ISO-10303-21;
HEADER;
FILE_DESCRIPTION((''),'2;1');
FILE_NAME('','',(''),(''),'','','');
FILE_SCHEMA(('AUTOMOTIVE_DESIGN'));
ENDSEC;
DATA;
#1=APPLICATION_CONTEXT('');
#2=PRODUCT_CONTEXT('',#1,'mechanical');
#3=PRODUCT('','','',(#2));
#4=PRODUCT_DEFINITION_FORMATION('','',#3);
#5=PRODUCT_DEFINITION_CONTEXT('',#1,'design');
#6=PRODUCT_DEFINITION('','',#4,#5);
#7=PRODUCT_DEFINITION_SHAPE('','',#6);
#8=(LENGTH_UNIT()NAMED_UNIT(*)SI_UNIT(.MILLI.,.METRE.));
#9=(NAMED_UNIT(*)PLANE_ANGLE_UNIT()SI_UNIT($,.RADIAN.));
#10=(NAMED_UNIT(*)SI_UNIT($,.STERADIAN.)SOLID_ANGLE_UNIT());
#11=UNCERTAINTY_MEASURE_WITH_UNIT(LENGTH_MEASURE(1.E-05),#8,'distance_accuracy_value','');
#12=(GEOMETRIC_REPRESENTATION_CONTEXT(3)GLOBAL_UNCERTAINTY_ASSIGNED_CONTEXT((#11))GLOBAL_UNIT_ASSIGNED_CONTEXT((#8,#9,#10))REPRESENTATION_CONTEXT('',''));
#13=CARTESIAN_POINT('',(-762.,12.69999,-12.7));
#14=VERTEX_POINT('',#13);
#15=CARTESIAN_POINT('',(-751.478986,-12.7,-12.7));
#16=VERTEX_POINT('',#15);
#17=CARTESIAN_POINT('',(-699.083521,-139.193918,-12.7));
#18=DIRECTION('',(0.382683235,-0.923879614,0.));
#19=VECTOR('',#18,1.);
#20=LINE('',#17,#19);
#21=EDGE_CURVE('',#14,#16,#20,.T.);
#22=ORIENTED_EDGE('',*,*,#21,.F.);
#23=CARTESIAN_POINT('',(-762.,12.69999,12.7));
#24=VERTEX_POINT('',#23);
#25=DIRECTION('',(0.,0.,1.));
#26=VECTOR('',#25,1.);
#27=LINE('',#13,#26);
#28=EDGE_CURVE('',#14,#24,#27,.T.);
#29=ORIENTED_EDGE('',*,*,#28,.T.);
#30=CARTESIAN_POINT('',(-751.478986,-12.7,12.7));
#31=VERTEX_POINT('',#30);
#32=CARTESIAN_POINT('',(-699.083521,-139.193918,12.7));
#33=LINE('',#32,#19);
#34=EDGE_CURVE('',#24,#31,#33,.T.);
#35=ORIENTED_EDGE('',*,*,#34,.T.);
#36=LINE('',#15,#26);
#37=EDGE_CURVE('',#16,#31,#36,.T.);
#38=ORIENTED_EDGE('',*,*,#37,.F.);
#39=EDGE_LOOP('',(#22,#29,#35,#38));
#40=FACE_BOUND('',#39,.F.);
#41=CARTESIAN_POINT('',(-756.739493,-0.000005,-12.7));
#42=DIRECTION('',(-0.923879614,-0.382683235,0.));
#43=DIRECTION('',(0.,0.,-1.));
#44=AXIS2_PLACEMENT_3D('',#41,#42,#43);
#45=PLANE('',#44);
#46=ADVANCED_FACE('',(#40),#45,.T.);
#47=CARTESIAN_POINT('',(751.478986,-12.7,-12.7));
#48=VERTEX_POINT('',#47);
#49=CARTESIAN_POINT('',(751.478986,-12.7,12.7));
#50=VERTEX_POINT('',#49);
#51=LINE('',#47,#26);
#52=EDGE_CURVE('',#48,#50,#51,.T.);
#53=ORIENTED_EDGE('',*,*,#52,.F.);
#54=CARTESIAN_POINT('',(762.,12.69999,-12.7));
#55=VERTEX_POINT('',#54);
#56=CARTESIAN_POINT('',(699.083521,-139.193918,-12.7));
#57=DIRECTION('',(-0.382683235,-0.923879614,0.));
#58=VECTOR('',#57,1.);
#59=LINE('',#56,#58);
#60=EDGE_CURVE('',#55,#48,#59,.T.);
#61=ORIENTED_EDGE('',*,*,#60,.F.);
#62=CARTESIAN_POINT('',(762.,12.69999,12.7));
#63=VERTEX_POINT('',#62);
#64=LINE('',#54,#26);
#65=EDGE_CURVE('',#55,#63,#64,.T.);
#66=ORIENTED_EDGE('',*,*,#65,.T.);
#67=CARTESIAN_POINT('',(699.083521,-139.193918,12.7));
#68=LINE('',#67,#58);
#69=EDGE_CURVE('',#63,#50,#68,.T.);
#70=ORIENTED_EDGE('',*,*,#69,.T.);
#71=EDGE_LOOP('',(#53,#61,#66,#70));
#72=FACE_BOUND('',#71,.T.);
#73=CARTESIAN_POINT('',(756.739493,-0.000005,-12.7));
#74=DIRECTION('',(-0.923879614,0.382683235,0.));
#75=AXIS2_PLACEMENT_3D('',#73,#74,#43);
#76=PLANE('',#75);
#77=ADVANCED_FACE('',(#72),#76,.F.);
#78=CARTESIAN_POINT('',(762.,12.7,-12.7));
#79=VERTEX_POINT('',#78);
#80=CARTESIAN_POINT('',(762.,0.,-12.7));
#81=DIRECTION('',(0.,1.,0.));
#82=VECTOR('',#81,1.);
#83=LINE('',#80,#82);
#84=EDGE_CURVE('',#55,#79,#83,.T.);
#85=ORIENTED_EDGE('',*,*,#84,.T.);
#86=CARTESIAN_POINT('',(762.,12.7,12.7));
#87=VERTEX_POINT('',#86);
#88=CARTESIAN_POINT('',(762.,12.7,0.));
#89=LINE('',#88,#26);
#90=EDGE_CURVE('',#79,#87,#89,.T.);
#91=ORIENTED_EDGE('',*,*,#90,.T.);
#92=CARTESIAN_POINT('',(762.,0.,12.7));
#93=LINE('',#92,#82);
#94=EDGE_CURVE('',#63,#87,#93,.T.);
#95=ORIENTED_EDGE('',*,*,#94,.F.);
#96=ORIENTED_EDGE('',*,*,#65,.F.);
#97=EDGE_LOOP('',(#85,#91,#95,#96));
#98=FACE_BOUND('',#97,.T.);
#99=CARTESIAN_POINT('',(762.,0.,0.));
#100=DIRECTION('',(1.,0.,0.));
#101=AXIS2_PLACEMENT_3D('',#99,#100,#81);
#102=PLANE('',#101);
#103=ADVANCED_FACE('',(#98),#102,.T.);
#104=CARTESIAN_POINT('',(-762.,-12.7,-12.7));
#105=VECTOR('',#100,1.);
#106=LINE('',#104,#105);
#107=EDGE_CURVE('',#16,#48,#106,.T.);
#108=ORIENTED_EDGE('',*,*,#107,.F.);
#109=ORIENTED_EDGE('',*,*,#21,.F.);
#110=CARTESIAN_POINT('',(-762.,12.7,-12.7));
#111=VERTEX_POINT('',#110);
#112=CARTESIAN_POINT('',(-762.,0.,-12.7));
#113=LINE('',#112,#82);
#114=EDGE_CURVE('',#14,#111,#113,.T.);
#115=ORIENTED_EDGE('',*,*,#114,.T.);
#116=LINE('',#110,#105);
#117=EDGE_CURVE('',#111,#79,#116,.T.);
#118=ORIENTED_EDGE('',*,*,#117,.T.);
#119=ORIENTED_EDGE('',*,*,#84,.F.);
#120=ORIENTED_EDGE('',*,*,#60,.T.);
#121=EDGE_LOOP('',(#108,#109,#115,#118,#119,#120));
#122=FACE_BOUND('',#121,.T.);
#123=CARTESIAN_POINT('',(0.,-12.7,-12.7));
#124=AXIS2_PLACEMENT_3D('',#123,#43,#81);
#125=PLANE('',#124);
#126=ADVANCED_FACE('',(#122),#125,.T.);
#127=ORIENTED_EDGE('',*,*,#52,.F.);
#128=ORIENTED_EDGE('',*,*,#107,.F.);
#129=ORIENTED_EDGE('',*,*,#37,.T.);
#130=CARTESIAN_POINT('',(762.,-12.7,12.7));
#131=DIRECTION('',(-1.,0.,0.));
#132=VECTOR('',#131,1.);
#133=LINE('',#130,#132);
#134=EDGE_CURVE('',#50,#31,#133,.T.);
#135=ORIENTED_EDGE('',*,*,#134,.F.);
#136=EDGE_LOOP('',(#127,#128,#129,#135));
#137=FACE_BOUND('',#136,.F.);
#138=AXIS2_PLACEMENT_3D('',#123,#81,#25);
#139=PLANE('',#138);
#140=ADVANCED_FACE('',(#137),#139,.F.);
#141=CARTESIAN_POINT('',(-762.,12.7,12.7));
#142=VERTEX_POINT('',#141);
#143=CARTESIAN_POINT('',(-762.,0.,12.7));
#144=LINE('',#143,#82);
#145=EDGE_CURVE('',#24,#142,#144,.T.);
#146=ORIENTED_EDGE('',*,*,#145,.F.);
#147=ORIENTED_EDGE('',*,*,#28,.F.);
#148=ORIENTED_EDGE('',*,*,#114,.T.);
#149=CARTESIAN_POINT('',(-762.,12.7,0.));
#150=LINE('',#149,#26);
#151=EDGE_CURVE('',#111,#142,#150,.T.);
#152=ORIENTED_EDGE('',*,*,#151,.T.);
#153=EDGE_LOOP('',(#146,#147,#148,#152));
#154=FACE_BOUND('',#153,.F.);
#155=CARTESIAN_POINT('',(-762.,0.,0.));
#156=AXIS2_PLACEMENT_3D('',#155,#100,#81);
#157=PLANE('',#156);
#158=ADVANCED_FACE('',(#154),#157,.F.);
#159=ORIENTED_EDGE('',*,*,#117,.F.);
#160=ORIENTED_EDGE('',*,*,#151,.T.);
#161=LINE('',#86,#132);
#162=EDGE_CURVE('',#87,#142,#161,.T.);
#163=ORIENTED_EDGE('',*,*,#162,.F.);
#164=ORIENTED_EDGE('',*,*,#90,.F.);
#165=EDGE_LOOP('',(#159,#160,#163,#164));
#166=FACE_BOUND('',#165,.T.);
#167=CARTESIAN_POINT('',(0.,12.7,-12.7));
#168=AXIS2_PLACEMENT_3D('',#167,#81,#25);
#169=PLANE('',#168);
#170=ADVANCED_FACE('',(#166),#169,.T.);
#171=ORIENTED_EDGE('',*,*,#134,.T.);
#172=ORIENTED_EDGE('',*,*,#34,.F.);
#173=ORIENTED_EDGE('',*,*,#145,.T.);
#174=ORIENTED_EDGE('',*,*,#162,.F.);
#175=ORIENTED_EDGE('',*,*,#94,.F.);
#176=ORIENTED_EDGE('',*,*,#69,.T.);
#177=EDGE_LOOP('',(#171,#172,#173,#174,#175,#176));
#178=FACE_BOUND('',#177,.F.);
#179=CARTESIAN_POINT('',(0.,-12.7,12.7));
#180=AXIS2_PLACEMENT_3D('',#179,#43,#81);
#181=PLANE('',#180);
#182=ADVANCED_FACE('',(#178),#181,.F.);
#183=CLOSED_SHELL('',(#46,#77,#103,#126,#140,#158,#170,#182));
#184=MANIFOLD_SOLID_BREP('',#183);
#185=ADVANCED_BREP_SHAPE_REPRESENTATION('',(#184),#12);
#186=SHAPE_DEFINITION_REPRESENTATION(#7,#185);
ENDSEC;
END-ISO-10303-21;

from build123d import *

# Parameters (mm, degrees)
F0_W       = 25.4
F0_H       = 25.4
F1_DEPTH   = 762
F2_SIZE2   = 10.521014
F2_SIZE    = 25.39999
F2_2_SIZE2 = 10.521014
F2_2_SIZE  = 25.39999


# Not quite as in the source:
# - a fillet or chamfer is up to 0.001 mm smaller than in the source, because OpenCascade refuses the exact size


with BuildPart() as f1:
    # F0 (on Right) → F1 (new body, symmetric)
    with BuildSketch(Plane.YZ):
        Rectangle(F0_W, F0_H)
    extrude(amount=F1_DEPTH, both=True)

    # F2 (size 25.4 and 10.5210244843 in the source; OpenCascade refuses exactly that, so slightly less here)
    f2_edges = [f1.edges().sort_by_distance(p)[0] for p in [
        (762, -12.7, 0),
    ]]
    f2_side = f1.faces().sort_by_distance((762, 0, 0))[0]
    chamfer(f2_edges, length=F2_SIZE, length2=F2_SIZE2, reference=f2_side)

    # F2#2 (size 25.4 and 10.5210244843 in the source; OpenCascade refuses exactly that, so slightly less here)
    f2_2_edges = [f1.edges().sort_by_distance(p)[0] for p in [
        (-762, -12.7, 0),
    ]]
    f2_2_side = f1.faces().sort_by_distance((-762, 0, 0))[0]
    chamfer(f2_2_edges, length=F2_2_SIZE, length2=F2_2_SIZE2, reference=f2_2_side)


solid = f1.part
